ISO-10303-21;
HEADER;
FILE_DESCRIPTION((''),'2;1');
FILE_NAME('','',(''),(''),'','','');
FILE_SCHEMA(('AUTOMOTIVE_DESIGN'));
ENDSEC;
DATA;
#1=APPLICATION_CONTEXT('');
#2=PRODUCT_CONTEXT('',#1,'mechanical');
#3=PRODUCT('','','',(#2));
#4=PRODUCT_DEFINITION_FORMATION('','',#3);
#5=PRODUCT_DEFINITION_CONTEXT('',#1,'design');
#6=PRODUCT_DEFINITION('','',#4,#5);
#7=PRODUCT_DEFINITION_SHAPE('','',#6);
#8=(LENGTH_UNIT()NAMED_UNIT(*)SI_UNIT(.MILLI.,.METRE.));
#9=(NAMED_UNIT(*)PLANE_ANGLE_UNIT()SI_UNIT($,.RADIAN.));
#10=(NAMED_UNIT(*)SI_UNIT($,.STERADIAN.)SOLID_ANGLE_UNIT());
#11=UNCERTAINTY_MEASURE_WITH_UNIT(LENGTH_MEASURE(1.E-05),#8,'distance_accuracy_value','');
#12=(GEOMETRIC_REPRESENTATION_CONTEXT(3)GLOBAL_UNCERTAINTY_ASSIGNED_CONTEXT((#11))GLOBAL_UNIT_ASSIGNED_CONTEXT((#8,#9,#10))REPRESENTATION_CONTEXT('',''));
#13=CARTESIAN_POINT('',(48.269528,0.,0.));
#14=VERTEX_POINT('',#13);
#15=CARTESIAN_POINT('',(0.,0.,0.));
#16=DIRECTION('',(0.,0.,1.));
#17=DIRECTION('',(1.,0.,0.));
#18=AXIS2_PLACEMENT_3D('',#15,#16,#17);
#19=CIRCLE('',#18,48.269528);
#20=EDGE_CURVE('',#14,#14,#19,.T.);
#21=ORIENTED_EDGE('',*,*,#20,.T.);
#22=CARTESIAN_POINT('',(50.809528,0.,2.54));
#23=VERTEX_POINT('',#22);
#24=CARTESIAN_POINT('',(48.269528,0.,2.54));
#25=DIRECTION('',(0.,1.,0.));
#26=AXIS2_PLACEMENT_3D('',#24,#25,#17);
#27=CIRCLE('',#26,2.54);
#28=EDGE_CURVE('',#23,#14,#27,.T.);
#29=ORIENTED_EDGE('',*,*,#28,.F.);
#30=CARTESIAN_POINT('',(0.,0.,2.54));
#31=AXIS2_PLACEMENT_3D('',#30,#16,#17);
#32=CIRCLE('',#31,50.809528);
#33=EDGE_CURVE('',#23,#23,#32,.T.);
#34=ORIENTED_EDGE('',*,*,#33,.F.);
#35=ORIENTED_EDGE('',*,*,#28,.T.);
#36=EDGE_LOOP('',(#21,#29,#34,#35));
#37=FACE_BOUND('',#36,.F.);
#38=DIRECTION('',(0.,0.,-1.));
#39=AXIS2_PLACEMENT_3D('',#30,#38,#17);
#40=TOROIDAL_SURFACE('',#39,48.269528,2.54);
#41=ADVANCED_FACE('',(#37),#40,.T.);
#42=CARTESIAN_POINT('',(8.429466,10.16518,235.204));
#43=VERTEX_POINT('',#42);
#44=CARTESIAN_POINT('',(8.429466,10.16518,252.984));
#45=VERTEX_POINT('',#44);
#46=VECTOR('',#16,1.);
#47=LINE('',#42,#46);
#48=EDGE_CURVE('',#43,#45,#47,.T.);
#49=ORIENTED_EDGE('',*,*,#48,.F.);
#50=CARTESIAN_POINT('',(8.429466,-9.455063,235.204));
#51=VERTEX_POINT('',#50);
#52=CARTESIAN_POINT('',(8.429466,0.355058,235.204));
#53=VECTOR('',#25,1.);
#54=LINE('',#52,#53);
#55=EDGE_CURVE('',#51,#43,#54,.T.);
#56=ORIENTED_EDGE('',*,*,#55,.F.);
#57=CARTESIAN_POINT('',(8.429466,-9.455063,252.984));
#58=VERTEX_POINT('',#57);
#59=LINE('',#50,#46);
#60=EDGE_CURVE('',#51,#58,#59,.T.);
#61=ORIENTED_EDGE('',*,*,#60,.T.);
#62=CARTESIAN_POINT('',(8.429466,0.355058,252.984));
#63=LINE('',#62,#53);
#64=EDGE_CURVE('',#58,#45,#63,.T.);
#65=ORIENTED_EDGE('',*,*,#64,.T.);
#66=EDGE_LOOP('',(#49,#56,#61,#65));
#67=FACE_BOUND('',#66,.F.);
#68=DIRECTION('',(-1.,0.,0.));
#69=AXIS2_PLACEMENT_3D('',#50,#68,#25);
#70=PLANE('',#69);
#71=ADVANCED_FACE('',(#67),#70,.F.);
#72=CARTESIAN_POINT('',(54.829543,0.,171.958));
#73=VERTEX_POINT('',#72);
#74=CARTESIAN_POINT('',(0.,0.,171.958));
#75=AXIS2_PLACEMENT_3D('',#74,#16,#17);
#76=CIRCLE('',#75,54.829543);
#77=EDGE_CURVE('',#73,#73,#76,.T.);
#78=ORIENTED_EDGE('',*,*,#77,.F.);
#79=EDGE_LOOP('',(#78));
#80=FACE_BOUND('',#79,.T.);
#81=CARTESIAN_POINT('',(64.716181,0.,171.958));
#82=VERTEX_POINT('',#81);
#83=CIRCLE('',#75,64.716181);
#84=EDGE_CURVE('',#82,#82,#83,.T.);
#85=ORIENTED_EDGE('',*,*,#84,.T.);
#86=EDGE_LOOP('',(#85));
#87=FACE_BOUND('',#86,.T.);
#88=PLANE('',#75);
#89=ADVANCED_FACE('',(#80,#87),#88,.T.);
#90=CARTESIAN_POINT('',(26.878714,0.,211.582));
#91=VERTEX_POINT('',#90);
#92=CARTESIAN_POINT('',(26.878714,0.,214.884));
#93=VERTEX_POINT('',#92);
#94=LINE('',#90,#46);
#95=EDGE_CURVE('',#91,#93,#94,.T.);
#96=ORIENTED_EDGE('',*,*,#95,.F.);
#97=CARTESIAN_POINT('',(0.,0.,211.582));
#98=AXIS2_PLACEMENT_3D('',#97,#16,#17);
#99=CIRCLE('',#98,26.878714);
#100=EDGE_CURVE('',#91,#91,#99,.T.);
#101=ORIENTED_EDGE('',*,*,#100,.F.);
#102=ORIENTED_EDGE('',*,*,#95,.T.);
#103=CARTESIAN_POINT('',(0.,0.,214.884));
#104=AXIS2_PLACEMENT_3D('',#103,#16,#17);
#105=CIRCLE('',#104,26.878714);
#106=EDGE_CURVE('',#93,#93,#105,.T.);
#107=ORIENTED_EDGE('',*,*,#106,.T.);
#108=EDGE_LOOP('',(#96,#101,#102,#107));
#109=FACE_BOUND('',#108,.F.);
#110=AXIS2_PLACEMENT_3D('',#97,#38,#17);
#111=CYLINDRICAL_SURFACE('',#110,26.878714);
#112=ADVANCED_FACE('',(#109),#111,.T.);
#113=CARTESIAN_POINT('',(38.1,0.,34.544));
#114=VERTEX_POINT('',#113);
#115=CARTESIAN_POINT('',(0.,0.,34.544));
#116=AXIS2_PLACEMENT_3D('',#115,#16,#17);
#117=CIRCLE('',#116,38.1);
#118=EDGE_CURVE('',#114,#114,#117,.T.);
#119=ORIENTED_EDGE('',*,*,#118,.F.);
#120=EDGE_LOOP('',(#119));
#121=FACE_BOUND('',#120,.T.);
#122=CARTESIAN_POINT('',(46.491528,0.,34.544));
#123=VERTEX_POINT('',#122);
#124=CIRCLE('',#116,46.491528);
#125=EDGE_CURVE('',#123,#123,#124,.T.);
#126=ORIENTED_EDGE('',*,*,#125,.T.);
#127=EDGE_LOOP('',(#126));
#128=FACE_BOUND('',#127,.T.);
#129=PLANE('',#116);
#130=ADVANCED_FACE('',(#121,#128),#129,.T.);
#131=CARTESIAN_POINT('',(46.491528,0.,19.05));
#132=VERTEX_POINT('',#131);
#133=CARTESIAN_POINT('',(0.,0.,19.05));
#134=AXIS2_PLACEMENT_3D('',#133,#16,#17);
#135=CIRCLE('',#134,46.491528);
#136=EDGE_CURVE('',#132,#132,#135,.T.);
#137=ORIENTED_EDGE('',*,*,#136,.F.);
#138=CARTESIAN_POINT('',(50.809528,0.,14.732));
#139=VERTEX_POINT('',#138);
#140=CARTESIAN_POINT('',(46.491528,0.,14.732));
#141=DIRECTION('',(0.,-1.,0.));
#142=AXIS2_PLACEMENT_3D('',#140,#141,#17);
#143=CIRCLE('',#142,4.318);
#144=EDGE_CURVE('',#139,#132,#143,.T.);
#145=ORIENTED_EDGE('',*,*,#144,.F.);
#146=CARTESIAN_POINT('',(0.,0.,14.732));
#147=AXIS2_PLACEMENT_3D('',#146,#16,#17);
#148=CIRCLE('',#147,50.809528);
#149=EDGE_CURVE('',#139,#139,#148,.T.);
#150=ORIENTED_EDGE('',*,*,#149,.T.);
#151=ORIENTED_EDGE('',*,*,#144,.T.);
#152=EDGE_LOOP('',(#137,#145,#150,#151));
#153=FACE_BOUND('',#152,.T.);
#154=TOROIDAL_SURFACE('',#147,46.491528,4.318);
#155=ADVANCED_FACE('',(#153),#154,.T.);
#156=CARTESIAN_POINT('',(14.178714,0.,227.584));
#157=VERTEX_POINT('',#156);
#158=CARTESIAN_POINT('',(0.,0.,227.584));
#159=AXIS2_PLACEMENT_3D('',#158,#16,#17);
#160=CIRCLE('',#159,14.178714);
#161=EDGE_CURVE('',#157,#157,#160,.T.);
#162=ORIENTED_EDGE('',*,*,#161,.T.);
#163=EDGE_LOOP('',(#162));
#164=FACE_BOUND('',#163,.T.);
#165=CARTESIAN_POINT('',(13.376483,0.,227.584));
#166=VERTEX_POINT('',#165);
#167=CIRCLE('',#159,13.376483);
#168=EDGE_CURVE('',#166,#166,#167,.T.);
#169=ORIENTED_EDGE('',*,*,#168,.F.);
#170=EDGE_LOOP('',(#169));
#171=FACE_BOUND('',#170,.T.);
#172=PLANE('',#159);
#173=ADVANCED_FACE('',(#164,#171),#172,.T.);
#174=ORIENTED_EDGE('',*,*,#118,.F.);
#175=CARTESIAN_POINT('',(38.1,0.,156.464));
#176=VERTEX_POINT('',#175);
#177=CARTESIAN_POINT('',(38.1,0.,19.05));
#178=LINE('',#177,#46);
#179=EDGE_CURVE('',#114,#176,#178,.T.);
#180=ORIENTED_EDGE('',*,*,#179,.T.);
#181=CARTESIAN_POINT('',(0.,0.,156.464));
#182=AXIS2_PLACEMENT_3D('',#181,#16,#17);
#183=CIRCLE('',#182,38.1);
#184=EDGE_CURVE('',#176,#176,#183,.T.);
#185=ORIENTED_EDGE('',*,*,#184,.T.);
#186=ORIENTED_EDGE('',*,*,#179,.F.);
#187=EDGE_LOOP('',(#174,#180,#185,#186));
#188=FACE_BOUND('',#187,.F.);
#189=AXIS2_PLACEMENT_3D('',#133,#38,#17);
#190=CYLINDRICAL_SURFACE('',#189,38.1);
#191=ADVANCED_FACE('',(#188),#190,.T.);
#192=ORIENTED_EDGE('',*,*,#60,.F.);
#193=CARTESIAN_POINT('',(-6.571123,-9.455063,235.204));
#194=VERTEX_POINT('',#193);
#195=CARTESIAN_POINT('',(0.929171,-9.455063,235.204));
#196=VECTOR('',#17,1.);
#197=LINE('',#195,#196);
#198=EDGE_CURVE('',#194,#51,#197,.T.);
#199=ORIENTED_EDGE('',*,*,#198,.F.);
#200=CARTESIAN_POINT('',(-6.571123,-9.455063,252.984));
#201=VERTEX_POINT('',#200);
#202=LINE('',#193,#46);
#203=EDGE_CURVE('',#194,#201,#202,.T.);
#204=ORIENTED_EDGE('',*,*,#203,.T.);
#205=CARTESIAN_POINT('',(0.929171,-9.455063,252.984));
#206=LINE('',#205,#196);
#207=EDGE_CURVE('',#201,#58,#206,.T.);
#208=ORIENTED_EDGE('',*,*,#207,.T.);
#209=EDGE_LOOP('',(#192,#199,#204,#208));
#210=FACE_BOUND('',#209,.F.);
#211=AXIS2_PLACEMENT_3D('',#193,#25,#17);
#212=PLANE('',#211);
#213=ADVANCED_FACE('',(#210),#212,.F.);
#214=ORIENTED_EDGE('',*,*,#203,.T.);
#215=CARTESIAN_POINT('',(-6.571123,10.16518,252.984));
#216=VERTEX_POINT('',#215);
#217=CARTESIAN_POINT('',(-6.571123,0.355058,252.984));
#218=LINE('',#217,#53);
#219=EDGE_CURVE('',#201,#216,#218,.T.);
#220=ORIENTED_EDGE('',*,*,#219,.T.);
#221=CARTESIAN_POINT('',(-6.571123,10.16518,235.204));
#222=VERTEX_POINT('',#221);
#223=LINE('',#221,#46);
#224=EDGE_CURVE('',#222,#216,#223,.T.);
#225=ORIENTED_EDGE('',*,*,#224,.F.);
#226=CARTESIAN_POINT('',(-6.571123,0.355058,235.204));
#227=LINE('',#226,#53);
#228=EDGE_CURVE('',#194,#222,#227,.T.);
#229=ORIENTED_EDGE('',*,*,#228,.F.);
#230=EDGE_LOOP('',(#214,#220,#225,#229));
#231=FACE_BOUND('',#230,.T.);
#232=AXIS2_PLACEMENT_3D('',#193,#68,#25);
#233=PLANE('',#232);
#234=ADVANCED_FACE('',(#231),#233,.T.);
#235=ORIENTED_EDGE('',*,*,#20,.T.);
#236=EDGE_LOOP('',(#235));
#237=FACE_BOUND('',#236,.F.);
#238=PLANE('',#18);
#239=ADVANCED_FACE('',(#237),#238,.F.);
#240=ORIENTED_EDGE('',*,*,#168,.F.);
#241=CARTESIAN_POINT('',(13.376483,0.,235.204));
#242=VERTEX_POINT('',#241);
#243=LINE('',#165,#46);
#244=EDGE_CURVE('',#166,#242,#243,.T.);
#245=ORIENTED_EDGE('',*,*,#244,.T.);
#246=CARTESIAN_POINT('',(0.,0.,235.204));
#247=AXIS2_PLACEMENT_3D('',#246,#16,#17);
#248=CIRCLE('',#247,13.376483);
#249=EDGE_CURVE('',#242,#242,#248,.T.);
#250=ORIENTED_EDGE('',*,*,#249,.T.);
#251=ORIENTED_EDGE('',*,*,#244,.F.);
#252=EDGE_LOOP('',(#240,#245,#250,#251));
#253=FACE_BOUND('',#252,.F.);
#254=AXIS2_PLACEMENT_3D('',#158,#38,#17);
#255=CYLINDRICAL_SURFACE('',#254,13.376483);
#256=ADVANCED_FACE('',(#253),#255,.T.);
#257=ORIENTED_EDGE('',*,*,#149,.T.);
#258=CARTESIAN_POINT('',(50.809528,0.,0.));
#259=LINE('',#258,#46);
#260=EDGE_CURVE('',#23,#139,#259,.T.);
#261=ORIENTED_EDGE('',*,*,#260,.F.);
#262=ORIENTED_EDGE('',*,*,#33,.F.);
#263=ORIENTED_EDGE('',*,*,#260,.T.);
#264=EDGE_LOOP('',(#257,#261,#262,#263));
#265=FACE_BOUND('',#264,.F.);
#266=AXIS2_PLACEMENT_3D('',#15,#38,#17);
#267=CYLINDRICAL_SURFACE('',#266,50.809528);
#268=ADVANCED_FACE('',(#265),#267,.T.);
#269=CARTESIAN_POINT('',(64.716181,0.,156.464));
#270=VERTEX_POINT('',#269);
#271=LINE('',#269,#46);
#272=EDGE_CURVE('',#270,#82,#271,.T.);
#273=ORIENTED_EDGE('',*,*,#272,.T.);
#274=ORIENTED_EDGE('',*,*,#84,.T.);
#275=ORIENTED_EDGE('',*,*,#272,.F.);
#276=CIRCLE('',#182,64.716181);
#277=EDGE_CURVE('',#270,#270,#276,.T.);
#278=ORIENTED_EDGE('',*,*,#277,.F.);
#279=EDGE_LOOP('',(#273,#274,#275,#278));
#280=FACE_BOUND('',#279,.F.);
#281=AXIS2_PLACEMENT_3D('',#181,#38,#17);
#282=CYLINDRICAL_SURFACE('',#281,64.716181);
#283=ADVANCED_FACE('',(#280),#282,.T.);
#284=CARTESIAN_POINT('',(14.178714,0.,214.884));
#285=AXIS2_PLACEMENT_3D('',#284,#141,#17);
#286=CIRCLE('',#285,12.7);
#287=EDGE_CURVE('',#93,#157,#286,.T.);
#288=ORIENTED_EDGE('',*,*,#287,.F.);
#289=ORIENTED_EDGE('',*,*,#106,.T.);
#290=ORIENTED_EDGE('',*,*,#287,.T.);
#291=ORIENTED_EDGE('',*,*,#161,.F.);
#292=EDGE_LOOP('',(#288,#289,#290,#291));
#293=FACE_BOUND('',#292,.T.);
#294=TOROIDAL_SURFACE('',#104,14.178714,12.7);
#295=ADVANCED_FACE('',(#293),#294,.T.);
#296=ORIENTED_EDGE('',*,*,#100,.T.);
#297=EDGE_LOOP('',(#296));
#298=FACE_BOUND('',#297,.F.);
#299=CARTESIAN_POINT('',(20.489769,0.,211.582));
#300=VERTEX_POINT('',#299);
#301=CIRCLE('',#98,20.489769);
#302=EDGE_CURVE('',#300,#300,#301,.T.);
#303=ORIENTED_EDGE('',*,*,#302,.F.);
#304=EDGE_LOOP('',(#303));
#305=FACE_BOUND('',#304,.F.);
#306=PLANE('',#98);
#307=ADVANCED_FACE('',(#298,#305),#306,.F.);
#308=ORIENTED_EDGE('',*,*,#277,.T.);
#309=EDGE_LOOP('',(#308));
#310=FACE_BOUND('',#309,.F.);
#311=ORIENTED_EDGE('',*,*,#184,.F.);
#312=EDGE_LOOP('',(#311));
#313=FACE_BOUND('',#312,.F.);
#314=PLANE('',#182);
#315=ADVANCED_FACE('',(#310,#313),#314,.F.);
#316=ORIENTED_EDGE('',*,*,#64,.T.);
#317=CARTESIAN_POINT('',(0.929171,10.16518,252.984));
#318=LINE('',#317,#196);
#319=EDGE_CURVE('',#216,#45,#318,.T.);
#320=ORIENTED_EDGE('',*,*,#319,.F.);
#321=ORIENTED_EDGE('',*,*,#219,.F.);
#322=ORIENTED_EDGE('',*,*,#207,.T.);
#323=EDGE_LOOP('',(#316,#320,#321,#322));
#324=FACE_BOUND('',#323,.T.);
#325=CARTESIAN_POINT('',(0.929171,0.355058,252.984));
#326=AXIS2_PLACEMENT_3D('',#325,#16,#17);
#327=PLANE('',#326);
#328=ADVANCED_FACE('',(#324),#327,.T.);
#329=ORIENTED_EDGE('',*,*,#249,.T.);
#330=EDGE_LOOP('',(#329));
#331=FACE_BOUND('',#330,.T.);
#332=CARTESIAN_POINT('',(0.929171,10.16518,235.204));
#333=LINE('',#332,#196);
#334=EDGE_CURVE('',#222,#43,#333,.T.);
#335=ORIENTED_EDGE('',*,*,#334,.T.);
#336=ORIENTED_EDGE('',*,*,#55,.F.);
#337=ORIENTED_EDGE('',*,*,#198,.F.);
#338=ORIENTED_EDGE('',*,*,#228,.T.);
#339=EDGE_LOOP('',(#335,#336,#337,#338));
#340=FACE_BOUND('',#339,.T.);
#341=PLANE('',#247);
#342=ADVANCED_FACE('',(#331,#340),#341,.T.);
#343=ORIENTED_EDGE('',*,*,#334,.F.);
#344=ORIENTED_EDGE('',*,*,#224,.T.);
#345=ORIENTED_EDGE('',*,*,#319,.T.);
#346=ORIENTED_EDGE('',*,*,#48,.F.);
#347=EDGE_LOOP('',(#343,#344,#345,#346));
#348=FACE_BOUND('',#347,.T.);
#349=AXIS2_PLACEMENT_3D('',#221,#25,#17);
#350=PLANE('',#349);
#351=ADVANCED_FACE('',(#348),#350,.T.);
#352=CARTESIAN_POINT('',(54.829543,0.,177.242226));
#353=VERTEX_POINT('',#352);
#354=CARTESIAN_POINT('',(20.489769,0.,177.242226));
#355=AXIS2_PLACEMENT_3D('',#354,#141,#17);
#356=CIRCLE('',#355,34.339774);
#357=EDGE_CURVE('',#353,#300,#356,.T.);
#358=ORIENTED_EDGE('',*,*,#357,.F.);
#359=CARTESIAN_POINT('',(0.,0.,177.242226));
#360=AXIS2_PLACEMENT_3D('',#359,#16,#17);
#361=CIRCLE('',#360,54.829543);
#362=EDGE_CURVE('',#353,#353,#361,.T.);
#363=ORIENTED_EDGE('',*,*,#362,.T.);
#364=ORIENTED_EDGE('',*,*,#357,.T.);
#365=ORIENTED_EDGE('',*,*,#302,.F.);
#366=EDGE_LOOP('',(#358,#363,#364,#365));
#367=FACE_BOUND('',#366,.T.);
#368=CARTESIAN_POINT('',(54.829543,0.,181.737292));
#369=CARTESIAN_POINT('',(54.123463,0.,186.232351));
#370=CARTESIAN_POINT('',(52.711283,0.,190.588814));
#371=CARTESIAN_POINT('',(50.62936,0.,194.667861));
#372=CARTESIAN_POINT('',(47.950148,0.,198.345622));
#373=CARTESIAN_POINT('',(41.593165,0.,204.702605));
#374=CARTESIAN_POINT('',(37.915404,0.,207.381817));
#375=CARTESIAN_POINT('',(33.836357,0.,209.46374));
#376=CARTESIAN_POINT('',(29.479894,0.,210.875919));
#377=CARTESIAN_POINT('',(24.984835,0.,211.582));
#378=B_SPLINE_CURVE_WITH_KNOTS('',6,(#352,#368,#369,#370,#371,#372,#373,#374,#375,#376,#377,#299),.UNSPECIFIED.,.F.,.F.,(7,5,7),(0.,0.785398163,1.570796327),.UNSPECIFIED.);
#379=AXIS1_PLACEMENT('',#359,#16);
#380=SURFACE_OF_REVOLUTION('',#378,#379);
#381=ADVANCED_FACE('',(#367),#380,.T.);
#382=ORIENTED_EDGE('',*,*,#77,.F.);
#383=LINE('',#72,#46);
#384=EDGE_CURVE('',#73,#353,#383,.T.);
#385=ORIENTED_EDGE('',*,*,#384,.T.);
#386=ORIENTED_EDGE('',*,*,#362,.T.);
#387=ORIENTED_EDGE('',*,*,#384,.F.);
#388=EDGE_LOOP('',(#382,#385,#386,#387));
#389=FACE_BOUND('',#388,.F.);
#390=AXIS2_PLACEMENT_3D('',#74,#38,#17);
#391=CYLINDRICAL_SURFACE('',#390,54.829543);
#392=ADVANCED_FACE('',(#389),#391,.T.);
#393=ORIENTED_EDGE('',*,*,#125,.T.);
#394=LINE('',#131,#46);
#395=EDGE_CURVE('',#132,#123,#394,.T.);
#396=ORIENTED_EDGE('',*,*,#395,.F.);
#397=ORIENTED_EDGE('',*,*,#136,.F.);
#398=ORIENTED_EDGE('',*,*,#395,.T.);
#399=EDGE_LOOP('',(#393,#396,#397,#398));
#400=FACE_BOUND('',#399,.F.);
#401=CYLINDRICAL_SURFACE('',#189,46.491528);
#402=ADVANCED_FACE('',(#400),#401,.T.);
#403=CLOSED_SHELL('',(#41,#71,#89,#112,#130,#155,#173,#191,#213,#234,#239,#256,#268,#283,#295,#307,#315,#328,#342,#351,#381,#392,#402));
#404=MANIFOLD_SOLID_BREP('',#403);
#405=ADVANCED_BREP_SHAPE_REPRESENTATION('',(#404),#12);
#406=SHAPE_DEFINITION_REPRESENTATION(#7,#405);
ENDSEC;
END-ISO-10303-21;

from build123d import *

# Parameters (mm, degrees)
F0_R        = 50.8095284436
F1_DEPTH    = 19.05
F2_R        = 4.318
F3_R        = 2.54
F5_R        = 38.1
F6_DEPTH    = 137.414
F8_R        = 64.7161809078
F1_FACE_R   = 46.4915284436
F1_FACE_R_2 = 38.1
F9_DEPTH    = 15.494
F11_R       = 54.8295431731
F12_DEPTH   = 39.624
F13_R       = 34.3397737112
F15_R       = 26.8787144504
F16_DEPTH   = 16.002
F17_R       = 12.7
F19_R       = 13.3764834425
F20_DEPTH   = 7.62
F22_W       = 15.0005891919
F22_H       = 19.6202434599
F23_DEPTH   = 17.78


with BuildPart() as f1:
    # F0 (on Top) → F1 (new body)
    with BuildSketch(Plane.XY):
        Circle(F0_R)
    extrude(amount=F1_DEPTH)

    # F2
    f2_edges = [f1.edges().sort_by_distance(p)[0] for p in [
        (-50.809528, 0, 19.05),
    ]]
    fillet(f2_edges, radius=F2_R)

    # F3
    f3_edges = [f1.edges().sort_by_distance(p)[0] for p in [
        (-50.809528, 0, 0),
    ]]
    fillet(f3_edges, radius=F3_R)

    # F5 (on offset) → F6 (join)
    with BuildSketch(Plane.XY.offset(19.05)):
        Circle(F5_R)
    extrude(amount=F6_DEPTH)

    # F8 (on offset) + F1_face (on face) → F9 (join)
    with BuildSketch(Plane.XY.offset(156.464)):
        Circle(F8_R)
    with BuildSketch(Plane.XY.offset(19.05)):
        Circle(F1_FACE_R)
        Circle(F1_FACE_R_2, mode=Mode.SUBTRACT)
    extrude(amount=F9_DEPTH)

    # F11 (on offset) → F12 (join)
    with BuildSketch(Plane.XY.offset(171.958)):
        Circle(F11_R)
    extrude(amount=F12_DEPTH)

    # F13
    f13_edges = [f1.edges().sort_by_distance(p)[0] for p in [
        (-54.829543, 0, 211.582),
    ]]
    fillet(f13_edges, radius=F13_R)

    # F15 (on offset) → F16 (join)
    with BuildSketch(Plane.XY.offset(211.582)):
        Circle(F15_R)
    extrude(amount=F16_DEPTH)

    # F17
    f17_edges = [f1.edges().sort_by_distance(p)[0] for p in [
        (-26.878714, 0, 227.584),
    ]]
    fillet(f17_edges, radius=F17_R)

    # F19 (on offset) → F20 (join)
    with BuildSketch(Plane.XY.offset(227.584)):
        Circle(F19_R)
    extrude(amount=F20_DEPTH)

    # F22 (on offset) → F23 (join)
    with BuildSketch(Plane.XY.offset(235.204)):
        with Locations((0.9291712195, 0.3550583497)):
            Rectangle(F22_W, F22_H)
    extrude(amount=F23_DEPTH)


solid = f1.part
